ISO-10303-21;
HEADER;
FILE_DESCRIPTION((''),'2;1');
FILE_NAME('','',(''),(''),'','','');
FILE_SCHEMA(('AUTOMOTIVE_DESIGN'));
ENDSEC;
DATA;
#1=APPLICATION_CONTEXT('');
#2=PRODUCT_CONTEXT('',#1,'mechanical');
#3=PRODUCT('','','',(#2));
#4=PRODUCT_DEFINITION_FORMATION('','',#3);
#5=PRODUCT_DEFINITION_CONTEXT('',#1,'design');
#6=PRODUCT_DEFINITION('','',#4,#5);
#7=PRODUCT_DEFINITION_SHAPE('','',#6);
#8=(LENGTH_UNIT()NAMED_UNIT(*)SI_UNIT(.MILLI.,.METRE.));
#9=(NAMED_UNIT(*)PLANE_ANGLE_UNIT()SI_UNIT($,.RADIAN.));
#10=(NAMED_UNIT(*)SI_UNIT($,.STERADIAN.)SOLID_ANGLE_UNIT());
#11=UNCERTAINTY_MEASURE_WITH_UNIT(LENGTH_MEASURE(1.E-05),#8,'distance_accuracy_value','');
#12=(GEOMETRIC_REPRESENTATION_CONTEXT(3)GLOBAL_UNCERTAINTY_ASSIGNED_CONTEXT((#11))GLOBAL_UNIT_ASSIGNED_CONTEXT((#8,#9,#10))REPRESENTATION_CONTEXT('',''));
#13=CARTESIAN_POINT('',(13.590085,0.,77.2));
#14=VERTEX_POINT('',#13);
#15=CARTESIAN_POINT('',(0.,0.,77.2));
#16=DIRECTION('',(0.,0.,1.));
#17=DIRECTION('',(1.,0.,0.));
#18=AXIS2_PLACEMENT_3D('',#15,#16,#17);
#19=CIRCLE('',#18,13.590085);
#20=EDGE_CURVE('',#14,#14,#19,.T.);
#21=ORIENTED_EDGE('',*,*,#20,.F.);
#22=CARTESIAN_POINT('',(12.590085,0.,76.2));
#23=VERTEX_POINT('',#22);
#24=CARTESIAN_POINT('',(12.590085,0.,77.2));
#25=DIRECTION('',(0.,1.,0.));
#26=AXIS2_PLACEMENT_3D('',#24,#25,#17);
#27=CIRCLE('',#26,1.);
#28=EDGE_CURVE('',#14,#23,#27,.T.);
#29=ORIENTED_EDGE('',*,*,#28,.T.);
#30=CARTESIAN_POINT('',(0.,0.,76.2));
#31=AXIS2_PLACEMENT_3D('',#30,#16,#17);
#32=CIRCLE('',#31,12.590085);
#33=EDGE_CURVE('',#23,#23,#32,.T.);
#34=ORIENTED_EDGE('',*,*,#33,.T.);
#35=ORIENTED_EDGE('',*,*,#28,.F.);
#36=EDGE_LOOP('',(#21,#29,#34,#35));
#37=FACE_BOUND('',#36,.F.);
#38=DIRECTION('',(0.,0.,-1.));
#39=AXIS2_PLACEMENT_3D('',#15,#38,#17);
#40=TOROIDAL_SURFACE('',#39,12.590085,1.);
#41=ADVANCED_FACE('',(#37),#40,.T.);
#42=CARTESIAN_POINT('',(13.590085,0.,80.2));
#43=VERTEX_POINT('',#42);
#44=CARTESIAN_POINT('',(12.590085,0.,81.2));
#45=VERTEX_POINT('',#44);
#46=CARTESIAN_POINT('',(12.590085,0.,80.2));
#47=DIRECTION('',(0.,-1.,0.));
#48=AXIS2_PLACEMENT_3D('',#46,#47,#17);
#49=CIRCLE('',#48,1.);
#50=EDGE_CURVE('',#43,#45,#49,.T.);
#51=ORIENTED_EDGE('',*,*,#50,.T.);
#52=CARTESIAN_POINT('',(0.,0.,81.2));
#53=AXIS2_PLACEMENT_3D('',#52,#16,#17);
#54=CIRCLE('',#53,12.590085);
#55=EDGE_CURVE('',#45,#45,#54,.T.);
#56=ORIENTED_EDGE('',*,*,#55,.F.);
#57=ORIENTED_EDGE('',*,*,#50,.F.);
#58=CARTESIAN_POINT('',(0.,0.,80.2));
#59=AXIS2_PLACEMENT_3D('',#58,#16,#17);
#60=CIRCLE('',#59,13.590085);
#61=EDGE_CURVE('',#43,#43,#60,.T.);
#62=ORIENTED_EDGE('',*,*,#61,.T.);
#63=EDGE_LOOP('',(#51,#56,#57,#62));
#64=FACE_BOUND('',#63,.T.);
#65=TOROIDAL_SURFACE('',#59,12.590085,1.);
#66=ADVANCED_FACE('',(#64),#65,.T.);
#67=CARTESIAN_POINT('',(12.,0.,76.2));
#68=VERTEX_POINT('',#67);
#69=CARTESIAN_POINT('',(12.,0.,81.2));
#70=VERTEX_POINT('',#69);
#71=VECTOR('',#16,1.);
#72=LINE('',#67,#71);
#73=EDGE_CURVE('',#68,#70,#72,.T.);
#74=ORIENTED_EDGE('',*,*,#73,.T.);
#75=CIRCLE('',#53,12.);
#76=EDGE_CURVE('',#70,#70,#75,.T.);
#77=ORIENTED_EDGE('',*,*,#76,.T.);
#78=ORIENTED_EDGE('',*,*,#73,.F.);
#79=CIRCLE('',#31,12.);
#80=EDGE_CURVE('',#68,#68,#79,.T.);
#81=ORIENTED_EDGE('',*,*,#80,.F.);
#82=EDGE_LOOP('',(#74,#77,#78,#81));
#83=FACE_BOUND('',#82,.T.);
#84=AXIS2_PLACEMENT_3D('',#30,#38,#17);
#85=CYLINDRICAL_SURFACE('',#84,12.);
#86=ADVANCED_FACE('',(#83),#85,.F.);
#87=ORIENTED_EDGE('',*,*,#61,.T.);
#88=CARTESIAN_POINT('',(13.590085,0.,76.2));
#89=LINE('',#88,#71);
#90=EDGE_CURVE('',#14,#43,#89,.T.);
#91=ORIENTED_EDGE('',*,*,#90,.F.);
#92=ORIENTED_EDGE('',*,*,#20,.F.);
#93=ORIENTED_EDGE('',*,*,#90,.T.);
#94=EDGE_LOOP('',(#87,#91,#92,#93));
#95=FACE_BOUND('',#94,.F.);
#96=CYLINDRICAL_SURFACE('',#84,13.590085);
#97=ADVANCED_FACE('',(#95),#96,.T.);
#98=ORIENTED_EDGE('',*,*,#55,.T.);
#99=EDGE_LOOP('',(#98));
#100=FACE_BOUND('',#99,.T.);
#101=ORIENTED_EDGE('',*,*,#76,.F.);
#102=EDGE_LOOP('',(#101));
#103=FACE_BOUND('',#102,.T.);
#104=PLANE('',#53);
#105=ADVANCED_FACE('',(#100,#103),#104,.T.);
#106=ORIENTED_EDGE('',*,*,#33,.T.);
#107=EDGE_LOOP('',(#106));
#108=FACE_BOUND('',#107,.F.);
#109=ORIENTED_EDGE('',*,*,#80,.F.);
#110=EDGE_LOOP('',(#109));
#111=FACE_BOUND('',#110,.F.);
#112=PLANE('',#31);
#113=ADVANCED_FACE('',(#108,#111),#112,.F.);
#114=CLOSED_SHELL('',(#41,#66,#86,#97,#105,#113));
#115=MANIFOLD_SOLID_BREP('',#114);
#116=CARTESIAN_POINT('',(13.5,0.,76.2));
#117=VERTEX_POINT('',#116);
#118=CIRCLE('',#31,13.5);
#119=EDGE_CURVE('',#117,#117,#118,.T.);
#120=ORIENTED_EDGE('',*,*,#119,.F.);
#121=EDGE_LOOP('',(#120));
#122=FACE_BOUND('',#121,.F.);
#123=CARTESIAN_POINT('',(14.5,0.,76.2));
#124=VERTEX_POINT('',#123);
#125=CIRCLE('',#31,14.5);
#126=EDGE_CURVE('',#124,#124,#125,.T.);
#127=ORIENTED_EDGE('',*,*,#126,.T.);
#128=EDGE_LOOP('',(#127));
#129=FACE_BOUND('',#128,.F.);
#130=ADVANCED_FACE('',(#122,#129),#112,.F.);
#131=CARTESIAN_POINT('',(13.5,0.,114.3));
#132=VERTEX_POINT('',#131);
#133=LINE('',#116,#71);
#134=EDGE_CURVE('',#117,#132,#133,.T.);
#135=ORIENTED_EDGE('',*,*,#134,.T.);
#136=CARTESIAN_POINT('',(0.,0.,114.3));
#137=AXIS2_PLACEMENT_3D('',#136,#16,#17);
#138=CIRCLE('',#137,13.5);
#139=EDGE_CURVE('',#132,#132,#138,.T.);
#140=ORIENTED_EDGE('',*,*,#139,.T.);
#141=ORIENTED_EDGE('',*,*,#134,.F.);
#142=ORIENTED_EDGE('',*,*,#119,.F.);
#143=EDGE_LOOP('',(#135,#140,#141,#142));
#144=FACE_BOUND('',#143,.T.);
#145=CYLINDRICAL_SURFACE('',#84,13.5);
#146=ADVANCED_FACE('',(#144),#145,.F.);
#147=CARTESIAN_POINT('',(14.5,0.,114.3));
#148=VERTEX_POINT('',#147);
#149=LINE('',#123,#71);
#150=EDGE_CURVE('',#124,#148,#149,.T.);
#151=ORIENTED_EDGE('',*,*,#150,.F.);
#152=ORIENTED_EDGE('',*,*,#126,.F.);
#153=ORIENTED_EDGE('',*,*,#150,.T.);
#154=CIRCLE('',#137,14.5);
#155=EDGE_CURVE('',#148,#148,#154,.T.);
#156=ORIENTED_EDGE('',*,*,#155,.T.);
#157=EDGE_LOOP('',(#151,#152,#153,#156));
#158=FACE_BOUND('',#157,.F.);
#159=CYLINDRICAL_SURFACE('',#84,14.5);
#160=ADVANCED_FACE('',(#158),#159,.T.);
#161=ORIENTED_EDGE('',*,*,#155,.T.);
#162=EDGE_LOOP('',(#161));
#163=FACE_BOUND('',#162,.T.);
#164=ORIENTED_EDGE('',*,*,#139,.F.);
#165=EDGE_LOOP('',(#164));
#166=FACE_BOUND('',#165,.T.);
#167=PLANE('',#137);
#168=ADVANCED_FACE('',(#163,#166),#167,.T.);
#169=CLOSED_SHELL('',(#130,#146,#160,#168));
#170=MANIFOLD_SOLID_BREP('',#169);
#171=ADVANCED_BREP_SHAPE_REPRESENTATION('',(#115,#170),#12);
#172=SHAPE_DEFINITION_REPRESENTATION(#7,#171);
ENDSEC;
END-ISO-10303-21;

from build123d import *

# Parameters (mm, degrees)
F2_R      = 14.5
F2_R_2    = 13.5
F8_DEPTH  = 38.1
F10_R     = 13.5900846428
F10_R_2   = 12
F11_DEPTH = 5
F12_R     = 1


# Not quite as in the source:
# - the program builds the solid bodies; features that only make, move or delete a surface that nothing else refers to are left out


with BuildPart() as f8:
    # F2 (on offset) → F8 (new body)
    with BuildSketch(Plane.XY.offset(76.2)):
        Circle(F2_R)
        Circle(F2_R_2, mode=Mode.SUBTRACT)
    extrude(amount=F8_DEPTH)


with BuildPart() as f11:
    # F10 (on offset) → F11 (new body)
    with BuildSketch(Plane.XY.offset(76.2)):
        Circle(F10_R)
        Circle(F10_R_2, mode=Mode.SUBTRACT)
    extrude(amount=F11_DEPTH)

    # F12
    f12_edges = [f11.edges().sort_by_distance(p)[0] for p in [
        (-13.590085, 0, 76.2),
        (-13.590085, 0, 81.2),
    ]]
    fillet(f12_edges, radius=F12_R)


solid = Compound([f8.part, f11.part])
